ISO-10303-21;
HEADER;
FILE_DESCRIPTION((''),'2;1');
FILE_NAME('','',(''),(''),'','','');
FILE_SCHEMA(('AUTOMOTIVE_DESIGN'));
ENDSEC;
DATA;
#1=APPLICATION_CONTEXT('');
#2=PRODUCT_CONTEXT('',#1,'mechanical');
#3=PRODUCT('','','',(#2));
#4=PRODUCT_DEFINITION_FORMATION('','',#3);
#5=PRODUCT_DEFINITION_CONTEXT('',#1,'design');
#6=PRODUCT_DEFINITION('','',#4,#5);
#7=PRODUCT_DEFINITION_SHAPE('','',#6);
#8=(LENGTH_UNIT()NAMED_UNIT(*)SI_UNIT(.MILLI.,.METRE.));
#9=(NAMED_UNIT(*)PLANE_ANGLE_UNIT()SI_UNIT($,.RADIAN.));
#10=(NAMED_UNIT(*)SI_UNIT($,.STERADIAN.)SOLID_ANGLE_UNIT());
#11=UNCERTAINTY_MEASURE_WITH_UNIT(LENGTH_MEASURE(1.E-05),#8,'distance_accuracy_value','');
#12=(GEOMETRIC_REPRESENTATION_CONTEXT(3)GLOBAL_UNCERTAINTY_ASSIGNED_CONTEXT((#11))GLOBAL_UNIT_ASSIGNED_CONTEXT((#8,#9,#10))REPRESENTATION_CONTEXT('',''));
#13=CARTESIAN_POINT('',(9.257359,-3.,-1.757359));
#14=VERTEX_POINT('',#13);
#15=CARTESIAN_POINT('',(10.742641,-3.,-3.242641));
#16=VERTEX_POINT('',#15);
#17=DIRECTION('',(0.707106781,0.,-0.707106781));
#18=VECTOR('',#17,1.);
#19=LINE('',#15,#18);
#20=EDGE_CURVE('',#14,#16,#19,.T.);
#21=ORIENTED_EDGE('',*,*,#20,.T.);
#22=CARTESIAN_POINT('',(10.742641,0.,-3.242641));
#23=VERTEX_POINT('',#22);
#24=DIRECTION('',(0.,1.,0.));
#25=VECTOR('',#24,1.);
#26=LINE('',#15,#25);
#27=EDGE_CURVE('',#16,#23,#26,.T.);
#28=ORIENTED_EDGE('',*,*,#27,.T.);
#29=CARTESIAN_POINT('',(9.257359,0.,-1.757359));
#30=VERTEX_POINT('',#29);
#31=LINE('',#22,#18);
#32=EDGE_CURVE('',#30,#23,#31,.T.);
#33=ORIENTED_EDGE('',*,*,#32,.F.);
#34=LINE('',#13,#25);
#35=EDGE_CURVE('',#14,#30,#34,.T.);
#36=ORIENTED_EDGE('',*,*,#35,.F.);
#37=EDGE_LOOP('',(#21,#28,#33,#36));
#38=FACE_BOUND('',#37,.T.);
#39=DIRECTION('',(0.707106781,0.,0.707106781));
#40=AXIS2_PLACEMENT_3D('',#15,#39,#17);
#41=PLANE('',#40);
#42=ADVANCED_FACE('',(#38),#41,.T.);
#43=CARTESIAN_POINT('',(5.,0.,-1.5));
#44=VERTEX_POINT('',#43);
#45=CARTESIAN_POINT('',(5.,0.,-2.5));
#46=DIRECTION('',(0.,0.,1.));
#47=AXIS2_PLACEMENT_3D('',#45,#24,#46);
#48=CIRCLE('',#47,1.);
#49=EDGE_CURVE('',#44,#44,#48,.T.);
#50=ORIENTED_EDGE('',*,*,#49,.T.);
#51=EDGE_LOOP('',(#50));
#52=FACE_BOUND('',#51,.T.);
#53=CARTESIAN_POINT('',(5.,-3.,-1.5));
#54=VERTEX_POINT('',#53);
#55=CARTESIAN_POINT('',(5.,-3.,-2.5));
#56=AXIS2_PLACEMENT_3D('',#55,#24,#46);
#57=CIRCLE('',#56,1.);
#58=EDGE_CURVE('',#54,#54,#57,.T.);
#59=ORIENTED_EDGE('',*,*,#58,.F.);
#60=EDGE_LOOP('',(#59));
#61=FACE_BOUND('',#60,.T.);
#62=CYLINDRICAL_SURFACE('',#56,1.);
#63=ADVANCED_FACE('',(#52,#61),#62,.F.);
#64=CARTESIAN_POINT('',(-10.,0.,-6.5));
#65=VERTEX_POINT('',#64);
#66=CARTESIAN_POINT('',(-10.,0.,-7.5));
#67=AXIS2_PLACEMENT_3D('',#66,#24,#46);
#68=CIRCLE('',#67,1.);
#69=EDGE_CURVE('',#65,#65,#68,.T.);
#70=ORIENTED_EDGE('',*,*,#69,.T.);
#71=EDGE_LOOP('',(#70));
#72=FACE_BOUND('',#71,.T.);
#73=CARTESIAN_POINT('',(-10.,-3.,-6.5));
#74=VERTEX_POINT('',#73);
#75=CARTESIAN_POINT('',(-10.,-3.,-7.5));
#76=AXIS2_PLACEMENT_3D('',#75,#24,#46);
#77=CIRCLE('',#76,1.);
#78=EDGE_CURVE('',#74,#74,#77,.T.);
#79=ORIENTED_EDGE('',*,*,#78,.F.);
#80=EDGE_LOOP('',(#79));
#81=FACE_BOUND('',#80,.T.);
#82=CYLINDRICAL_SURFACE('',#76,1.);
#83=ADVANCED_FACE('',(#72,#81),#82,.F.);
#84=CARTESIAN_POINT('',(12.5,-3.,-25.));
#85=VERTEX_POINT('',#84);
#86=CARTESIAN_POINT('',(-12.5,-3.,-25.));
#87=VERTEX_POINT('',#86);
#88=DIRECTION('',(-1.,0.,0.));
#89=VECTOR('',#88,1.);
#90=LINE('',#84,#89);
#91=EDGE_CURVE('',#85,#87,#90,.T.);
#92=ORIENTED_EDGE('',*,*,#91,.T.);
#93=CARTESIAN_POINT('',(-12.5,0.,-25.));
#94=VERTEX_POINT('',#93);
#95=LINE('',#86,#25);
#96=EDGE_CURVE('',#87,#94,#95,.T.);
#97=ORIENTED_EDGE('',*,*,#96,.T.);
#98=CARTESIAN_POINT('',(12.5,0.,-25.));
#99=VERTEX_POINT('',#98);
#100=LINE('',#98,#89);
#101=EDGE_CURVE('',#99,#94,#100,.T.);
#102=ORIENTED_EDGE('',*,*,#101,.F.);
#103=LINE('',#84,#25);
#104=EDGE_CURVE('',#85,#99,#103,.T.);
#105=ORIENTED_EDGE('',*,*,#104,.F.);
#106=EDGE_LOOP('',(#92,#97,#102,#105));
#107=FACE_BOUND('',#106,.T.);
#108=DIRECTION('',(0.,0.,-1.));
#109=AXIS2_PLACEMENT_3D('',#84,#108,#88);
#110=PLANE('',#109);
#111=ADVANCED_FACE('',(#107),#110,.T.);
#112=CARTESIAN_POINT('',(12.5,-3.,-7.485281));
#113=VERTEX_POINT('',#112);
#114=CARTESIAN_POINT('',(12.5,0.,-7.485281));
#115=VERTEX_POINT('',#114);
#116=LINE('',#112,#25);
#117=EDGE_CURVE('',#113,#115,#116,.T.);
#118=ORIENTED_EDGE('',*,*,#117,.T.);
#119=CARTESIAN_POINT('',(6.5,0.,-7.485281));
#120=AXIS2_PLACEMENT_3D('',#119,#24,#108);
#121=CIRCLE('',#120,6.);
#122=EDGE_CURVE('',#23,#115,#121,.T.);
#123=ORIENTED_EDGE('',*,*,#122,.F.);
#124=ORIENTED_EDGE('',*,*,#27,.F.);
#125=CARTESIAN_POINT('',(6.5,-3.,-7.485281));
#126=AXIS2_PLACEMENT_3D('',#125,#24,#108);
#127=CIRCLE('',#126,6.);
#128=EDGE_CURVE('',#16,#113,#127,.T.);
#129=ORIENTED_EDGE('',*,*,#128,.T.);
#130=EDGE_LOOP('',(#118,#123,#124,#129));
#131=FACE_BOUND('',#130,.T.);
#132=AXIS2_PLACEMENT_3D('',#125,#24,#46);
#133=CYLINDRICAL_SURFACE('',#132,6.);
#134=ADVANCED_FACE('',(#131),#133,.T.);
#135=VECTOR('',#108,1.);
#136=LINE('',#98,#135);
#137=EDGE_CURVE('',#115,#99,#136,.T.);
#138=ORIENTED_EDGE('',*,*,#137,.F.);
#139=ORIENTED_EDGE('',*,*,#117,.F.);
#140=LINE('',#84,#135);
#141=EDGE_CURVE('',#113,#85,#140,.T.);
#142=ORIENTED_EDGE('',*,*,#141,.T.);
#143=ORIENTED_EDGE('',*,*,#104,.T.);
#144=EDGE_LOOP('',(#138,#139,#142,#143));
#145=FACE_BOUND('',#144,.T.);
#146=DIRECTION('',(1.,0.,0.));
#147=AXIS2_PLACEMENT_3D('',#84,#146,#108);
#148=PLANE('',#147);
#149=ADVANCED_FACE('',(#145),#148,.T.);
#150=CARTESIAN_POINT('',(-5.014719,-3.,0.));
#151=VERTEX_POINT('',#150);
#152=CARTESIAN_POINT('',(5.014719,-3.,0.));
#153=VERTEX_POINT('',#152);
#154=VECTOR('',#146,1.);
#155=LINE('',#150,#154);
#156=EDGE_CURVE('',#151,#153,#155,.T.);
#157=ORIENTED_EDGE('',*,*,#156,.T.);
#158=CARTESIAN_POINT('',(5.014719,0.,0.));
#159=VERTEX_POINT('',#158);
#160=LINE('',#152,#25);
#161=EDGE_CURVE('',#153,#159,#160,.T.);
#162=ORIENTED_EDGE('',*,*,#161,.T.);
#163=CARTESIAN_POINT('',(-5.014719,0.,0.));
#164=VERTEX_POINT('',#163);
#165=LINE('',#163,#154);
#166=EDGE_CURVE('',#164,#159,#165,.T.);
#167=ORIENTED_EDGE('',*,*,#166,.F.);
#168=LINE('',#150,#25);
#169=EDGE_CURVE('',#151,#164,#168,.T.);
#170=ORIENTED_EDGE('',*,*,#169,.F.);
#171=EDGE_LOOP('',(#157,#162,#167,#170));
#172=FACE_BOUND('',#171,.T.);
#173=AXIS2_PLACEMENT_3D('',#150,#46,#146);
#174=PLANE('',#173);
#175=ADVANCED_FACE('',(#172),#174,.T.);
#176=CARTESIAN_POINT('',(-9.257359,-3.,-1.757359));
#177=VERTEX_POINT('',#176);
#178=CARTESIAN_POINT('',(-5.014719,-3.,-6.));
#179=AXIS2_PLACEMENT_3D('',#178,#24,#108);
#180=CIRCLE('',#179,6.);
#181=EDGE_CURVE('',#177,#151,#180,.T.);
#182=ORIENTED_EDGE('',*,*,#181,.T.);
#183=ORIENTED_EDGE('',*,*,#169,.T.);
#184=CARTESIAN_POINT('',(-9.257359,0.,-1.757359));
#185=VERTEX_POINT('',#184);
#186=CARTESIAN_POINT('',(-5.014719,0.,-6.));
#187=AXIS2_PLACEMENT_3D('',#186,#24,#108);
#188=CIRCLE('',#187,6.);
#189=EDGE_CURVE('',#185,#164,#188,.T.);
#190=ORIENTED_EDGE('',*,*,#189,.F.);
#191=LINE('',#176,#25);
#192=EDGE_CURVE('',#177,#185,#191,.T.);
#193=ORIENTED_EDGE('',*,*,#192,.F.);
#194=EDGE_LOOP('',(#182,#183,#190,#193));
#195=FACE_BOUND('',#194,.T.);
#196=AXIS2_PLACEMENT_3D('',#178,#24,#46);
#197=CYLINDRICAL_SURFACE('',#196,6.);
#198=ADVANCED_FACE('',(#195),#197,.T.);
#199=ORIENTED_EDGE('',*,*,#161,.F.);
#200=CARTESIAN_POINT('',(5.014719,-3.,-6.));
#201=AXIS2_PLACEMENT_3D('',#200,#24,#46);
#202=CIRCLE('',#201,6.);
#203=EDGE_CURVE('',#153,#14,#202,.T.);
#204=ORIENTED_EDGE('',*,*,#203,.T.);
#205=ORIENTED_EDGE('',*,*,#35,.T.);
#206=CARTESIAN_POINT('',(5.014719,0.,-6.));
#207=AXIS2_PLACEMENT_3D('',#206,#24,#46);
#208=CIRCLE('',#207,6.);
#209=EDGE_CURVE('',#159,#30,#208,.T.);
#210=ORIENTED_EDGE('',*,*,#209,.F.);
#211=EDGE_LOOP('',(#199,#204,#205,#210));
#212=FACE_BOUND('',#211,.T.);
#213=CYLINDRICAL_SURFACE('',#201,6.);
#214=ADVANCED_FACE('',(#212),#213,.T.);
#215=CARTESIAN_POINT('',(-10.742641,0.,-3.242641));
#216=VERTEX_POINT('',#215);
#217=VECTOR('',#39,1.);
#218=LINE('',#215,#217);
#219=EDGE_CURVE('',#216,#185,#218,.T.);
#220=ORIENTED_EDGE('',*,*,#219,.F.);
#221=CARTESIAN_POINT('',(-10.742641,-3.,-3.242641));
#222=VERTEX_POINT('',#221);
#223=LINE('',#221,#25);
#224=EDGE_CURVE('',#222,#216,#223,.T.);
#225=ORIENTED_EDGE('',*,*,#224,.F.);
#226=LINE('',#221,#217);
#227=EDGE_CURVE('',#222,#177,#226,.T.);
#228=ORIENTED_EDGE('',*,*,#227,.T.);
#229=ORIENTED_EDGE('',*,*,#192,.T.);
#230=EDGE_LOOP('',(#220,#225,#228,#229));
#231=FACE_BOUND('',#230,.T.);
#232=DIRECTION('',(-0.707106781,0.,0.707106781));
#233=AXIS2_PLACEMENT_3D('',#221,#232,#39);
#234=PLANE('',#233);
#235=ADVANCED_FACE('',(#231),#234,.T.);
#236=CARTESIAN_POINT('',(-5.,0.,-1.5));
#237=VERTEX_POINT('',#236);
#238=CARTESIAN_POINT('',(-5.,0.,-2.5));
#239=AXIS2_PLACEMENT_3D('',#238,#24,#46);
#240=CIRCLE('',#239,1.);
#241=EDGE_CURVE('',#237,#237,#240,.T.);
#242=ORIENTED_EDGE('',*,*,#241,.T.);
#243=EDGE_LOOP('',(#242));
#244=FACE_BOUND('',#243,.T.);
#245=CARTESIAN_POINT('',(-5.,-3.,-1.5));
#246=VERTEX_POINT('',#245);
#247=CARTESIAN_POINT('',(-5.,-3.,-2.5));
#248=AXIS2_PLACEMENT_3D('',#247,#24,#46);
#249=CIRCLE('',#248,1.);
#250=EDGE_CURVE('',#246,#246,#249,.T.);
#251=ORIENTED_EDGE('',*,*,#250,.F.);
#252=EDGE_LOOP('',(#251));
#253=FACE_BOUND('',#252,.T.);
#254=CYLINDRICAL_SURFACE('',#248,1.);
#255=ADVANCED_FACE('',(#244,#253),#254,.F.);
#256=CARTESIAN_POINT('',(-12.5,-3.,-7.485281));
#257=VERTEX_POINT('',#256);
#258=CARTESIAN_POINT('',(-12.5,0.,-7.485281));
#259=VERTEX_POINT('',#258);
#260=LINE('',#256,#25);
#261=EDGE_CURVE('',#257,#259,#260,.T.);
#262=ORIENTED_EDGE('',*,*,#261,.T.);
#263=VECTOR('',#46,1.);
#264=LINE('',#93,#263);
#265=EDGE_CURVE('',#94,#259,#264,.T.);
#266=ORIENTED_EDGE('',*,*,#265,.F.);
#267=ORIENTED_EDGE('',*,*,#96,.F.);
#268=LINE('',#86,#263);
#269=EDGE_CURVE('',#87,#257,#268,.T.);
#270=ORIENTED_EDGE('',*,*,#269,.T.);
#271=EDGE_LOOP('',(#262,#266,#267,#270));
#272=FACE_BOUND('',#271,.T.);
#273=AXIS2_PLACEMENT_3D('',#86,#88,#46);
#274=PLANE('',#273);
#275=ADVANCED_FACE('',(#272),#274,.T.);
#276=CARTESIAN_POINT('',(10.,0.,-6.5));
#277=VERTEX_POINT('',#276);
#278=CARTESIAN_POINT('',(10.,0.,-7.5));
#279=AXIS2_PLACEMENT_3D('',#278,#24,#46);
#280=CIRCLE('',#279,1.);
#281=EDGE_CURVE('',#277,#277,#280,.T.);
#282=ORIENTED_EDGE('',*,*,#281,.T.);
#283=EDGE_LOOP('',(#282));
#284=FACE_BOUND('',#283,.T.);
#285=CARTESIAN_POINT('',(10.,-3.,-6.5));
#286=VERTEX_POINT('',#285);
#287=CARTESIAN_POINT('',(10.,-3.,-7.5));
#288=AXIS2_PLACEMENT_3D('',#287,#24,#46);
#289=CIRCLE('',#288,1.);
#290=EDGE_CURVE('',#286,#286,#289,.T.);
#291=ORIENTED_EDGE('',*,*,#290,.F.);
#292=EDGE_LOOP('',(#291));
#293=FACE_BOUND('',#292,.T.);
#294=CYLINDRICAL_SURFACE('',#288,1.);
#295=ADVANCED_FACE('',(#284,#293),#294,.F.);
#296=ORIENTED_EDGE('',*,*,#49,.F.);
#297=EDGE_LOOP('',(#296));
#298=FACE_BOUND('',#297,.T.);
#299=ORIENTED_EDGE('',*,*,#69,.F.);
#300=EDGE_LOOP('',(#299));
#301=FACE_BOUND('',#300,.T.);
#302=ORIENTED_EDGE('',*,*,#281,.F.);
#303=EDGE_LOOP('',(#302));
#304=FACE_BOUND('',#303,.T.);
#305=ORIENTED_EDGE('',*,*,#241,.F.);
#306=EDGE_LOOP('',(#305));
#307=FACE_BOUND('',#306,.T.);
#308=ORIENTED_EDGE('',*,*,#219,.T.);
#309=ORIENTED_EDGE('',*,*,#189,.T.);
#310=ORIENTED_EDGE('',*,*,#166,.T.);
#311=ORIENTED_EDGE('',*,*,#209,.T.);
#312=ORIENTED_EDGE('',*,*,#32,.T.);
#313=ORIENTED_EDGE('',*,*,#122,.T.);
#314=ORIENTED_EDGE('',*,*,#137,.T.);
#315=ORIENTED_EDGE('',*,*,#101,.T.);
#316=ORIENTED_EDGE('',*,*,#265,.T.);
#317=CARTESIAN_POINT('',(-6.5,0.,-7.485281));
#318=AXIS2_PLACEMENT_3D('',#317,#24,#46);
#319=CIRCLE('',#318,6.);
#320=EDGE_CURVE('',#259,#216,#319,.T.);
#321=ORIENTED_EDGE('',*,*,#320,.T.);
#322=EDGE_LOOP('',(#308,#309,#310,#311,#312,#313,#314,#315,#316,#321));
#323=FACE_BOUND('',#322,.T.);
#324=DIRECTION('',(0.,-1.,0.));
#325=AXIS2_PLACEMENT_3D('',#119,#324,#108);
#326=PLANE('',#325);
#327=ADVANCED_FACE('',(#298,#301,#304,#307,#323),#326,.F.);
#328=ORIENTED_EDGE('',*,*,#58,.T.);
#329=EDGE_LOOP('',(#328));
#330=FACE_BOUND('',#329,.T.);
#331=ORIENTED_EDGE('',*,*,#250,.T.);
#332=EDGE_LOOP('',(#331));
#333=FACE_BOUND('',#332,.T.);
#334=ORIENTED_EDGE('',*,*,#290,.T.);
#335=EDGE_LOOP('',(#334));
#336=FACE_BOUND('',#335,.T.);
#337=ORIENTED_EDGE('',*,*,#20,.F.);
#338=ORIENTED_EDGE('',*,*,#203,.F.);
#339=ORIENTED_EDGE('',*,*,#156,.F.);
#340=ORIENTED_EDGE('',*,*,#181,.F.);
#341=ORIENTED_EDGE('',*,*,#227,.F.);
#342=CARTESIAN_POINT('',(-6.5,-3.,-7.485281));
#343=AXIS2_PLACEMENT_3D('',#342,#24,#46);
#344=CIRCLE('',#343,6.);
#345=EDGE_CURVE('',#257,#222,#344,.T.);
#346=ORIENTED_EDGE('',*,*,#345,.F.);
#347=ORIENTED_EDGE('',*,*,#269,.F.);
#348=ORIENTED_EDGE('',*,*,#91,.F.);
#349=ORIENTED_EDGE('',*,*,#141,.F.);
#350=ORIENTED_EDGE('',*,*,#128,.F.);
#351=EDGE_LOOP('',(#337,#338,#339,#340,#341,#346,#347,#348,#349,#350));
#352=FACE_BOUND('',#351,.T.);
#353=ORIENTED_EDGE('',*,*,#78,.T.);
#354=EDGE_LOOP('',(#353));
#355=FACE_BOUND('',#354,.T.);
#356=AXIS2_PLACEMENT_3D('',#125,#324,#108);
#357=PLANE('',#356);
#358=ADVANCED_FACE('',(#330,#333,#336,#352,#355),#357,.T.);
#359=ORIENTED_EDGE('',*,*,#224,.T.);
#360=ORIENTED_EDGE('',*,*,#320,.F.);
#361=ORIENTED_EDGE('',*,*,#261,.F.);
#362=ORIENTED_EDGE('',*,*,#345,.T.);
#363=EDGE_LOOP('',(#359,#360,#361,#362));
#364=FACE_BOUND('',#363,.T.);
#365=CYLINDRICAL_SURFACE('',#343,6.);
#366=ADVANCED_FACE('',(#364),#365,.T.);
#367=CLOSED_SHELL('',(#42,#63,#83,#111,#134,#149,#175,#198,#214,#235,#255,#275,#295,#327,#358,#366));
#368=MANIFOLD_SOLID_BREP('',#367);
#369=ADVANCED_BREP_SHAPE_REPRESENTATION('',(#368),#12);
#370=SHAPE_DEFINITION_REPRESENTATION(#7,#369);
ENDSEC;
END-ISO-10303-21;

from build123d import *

# Parameters (mm, degrees)
CROQUIS1_R        = 1
BRIDA_BASE1_DEPTH = 3


# Sheet-metal steps are written as plain solids
with BuildPart() as part:
    # Croquis1 → Brida base1 (new body)
    with BuildSketch(Plane(origin=(0, 0, 0), x_dir=(1, 0, 0), z_dir=(0, 1, 0))):
        with BuildLine():
            Line((-5.014718626, 0), (5.014718626, 0))
            ThreePointArc((5.014718626, 0), (7.31081922, 0.456722805), (9.257359313, 1.757359313))
            Line((9.257359313, 1.757359313), (10.742640687, 3.242640687))
            ThreePointArc((10.742640687, 3.242640687), (12.043277195, 5.18918078), (12.5, 7.485281374))
            Line((12.5, 7.485281374), (12.5, 25))
            Line((12.5, 25), (-12.5, 25))
            Line((-12.5, 25), (-12.5, 7.485281374))
            ThreePointArc((-12.5, 7.485281374), (-12.043277195, 5.18918078), (-10.742640687, 3.242640687))
            Line((-10.742640687, 3.242640687), (-9.257359313, 1.757359313))
            ThreePointArc((-9.257359313, 1.757359313), (-7.31081922, 0.456722805), (-5.014718626, 0))
        make_face()
        with Locations(Location((-10, 7.5, 0), (0, 0, 270))):
            Circle(CROQUIS1_R, mode=Mode.SUBTRACT)
        with Locations(Location((-5, 2.5, 0), (0, 0, 270))):
            Circle(CROQUIS1_R, mode=Mode.SUBTRACT)
        with Locations(Location((10, 7.5, 0), (0, 0, 270))):
            Circle(CROQUIS1_R, mode=Mode.SUBTRACT)
        with Locations(Location((5, 2.5, 0), (0, 0, 270))):
            Circle(CROQUIS1_R, mode=Mode.SUBTRACT)
    extrude(amount=-BRIDA_BASE1_DEPTH)


solid = part.part
